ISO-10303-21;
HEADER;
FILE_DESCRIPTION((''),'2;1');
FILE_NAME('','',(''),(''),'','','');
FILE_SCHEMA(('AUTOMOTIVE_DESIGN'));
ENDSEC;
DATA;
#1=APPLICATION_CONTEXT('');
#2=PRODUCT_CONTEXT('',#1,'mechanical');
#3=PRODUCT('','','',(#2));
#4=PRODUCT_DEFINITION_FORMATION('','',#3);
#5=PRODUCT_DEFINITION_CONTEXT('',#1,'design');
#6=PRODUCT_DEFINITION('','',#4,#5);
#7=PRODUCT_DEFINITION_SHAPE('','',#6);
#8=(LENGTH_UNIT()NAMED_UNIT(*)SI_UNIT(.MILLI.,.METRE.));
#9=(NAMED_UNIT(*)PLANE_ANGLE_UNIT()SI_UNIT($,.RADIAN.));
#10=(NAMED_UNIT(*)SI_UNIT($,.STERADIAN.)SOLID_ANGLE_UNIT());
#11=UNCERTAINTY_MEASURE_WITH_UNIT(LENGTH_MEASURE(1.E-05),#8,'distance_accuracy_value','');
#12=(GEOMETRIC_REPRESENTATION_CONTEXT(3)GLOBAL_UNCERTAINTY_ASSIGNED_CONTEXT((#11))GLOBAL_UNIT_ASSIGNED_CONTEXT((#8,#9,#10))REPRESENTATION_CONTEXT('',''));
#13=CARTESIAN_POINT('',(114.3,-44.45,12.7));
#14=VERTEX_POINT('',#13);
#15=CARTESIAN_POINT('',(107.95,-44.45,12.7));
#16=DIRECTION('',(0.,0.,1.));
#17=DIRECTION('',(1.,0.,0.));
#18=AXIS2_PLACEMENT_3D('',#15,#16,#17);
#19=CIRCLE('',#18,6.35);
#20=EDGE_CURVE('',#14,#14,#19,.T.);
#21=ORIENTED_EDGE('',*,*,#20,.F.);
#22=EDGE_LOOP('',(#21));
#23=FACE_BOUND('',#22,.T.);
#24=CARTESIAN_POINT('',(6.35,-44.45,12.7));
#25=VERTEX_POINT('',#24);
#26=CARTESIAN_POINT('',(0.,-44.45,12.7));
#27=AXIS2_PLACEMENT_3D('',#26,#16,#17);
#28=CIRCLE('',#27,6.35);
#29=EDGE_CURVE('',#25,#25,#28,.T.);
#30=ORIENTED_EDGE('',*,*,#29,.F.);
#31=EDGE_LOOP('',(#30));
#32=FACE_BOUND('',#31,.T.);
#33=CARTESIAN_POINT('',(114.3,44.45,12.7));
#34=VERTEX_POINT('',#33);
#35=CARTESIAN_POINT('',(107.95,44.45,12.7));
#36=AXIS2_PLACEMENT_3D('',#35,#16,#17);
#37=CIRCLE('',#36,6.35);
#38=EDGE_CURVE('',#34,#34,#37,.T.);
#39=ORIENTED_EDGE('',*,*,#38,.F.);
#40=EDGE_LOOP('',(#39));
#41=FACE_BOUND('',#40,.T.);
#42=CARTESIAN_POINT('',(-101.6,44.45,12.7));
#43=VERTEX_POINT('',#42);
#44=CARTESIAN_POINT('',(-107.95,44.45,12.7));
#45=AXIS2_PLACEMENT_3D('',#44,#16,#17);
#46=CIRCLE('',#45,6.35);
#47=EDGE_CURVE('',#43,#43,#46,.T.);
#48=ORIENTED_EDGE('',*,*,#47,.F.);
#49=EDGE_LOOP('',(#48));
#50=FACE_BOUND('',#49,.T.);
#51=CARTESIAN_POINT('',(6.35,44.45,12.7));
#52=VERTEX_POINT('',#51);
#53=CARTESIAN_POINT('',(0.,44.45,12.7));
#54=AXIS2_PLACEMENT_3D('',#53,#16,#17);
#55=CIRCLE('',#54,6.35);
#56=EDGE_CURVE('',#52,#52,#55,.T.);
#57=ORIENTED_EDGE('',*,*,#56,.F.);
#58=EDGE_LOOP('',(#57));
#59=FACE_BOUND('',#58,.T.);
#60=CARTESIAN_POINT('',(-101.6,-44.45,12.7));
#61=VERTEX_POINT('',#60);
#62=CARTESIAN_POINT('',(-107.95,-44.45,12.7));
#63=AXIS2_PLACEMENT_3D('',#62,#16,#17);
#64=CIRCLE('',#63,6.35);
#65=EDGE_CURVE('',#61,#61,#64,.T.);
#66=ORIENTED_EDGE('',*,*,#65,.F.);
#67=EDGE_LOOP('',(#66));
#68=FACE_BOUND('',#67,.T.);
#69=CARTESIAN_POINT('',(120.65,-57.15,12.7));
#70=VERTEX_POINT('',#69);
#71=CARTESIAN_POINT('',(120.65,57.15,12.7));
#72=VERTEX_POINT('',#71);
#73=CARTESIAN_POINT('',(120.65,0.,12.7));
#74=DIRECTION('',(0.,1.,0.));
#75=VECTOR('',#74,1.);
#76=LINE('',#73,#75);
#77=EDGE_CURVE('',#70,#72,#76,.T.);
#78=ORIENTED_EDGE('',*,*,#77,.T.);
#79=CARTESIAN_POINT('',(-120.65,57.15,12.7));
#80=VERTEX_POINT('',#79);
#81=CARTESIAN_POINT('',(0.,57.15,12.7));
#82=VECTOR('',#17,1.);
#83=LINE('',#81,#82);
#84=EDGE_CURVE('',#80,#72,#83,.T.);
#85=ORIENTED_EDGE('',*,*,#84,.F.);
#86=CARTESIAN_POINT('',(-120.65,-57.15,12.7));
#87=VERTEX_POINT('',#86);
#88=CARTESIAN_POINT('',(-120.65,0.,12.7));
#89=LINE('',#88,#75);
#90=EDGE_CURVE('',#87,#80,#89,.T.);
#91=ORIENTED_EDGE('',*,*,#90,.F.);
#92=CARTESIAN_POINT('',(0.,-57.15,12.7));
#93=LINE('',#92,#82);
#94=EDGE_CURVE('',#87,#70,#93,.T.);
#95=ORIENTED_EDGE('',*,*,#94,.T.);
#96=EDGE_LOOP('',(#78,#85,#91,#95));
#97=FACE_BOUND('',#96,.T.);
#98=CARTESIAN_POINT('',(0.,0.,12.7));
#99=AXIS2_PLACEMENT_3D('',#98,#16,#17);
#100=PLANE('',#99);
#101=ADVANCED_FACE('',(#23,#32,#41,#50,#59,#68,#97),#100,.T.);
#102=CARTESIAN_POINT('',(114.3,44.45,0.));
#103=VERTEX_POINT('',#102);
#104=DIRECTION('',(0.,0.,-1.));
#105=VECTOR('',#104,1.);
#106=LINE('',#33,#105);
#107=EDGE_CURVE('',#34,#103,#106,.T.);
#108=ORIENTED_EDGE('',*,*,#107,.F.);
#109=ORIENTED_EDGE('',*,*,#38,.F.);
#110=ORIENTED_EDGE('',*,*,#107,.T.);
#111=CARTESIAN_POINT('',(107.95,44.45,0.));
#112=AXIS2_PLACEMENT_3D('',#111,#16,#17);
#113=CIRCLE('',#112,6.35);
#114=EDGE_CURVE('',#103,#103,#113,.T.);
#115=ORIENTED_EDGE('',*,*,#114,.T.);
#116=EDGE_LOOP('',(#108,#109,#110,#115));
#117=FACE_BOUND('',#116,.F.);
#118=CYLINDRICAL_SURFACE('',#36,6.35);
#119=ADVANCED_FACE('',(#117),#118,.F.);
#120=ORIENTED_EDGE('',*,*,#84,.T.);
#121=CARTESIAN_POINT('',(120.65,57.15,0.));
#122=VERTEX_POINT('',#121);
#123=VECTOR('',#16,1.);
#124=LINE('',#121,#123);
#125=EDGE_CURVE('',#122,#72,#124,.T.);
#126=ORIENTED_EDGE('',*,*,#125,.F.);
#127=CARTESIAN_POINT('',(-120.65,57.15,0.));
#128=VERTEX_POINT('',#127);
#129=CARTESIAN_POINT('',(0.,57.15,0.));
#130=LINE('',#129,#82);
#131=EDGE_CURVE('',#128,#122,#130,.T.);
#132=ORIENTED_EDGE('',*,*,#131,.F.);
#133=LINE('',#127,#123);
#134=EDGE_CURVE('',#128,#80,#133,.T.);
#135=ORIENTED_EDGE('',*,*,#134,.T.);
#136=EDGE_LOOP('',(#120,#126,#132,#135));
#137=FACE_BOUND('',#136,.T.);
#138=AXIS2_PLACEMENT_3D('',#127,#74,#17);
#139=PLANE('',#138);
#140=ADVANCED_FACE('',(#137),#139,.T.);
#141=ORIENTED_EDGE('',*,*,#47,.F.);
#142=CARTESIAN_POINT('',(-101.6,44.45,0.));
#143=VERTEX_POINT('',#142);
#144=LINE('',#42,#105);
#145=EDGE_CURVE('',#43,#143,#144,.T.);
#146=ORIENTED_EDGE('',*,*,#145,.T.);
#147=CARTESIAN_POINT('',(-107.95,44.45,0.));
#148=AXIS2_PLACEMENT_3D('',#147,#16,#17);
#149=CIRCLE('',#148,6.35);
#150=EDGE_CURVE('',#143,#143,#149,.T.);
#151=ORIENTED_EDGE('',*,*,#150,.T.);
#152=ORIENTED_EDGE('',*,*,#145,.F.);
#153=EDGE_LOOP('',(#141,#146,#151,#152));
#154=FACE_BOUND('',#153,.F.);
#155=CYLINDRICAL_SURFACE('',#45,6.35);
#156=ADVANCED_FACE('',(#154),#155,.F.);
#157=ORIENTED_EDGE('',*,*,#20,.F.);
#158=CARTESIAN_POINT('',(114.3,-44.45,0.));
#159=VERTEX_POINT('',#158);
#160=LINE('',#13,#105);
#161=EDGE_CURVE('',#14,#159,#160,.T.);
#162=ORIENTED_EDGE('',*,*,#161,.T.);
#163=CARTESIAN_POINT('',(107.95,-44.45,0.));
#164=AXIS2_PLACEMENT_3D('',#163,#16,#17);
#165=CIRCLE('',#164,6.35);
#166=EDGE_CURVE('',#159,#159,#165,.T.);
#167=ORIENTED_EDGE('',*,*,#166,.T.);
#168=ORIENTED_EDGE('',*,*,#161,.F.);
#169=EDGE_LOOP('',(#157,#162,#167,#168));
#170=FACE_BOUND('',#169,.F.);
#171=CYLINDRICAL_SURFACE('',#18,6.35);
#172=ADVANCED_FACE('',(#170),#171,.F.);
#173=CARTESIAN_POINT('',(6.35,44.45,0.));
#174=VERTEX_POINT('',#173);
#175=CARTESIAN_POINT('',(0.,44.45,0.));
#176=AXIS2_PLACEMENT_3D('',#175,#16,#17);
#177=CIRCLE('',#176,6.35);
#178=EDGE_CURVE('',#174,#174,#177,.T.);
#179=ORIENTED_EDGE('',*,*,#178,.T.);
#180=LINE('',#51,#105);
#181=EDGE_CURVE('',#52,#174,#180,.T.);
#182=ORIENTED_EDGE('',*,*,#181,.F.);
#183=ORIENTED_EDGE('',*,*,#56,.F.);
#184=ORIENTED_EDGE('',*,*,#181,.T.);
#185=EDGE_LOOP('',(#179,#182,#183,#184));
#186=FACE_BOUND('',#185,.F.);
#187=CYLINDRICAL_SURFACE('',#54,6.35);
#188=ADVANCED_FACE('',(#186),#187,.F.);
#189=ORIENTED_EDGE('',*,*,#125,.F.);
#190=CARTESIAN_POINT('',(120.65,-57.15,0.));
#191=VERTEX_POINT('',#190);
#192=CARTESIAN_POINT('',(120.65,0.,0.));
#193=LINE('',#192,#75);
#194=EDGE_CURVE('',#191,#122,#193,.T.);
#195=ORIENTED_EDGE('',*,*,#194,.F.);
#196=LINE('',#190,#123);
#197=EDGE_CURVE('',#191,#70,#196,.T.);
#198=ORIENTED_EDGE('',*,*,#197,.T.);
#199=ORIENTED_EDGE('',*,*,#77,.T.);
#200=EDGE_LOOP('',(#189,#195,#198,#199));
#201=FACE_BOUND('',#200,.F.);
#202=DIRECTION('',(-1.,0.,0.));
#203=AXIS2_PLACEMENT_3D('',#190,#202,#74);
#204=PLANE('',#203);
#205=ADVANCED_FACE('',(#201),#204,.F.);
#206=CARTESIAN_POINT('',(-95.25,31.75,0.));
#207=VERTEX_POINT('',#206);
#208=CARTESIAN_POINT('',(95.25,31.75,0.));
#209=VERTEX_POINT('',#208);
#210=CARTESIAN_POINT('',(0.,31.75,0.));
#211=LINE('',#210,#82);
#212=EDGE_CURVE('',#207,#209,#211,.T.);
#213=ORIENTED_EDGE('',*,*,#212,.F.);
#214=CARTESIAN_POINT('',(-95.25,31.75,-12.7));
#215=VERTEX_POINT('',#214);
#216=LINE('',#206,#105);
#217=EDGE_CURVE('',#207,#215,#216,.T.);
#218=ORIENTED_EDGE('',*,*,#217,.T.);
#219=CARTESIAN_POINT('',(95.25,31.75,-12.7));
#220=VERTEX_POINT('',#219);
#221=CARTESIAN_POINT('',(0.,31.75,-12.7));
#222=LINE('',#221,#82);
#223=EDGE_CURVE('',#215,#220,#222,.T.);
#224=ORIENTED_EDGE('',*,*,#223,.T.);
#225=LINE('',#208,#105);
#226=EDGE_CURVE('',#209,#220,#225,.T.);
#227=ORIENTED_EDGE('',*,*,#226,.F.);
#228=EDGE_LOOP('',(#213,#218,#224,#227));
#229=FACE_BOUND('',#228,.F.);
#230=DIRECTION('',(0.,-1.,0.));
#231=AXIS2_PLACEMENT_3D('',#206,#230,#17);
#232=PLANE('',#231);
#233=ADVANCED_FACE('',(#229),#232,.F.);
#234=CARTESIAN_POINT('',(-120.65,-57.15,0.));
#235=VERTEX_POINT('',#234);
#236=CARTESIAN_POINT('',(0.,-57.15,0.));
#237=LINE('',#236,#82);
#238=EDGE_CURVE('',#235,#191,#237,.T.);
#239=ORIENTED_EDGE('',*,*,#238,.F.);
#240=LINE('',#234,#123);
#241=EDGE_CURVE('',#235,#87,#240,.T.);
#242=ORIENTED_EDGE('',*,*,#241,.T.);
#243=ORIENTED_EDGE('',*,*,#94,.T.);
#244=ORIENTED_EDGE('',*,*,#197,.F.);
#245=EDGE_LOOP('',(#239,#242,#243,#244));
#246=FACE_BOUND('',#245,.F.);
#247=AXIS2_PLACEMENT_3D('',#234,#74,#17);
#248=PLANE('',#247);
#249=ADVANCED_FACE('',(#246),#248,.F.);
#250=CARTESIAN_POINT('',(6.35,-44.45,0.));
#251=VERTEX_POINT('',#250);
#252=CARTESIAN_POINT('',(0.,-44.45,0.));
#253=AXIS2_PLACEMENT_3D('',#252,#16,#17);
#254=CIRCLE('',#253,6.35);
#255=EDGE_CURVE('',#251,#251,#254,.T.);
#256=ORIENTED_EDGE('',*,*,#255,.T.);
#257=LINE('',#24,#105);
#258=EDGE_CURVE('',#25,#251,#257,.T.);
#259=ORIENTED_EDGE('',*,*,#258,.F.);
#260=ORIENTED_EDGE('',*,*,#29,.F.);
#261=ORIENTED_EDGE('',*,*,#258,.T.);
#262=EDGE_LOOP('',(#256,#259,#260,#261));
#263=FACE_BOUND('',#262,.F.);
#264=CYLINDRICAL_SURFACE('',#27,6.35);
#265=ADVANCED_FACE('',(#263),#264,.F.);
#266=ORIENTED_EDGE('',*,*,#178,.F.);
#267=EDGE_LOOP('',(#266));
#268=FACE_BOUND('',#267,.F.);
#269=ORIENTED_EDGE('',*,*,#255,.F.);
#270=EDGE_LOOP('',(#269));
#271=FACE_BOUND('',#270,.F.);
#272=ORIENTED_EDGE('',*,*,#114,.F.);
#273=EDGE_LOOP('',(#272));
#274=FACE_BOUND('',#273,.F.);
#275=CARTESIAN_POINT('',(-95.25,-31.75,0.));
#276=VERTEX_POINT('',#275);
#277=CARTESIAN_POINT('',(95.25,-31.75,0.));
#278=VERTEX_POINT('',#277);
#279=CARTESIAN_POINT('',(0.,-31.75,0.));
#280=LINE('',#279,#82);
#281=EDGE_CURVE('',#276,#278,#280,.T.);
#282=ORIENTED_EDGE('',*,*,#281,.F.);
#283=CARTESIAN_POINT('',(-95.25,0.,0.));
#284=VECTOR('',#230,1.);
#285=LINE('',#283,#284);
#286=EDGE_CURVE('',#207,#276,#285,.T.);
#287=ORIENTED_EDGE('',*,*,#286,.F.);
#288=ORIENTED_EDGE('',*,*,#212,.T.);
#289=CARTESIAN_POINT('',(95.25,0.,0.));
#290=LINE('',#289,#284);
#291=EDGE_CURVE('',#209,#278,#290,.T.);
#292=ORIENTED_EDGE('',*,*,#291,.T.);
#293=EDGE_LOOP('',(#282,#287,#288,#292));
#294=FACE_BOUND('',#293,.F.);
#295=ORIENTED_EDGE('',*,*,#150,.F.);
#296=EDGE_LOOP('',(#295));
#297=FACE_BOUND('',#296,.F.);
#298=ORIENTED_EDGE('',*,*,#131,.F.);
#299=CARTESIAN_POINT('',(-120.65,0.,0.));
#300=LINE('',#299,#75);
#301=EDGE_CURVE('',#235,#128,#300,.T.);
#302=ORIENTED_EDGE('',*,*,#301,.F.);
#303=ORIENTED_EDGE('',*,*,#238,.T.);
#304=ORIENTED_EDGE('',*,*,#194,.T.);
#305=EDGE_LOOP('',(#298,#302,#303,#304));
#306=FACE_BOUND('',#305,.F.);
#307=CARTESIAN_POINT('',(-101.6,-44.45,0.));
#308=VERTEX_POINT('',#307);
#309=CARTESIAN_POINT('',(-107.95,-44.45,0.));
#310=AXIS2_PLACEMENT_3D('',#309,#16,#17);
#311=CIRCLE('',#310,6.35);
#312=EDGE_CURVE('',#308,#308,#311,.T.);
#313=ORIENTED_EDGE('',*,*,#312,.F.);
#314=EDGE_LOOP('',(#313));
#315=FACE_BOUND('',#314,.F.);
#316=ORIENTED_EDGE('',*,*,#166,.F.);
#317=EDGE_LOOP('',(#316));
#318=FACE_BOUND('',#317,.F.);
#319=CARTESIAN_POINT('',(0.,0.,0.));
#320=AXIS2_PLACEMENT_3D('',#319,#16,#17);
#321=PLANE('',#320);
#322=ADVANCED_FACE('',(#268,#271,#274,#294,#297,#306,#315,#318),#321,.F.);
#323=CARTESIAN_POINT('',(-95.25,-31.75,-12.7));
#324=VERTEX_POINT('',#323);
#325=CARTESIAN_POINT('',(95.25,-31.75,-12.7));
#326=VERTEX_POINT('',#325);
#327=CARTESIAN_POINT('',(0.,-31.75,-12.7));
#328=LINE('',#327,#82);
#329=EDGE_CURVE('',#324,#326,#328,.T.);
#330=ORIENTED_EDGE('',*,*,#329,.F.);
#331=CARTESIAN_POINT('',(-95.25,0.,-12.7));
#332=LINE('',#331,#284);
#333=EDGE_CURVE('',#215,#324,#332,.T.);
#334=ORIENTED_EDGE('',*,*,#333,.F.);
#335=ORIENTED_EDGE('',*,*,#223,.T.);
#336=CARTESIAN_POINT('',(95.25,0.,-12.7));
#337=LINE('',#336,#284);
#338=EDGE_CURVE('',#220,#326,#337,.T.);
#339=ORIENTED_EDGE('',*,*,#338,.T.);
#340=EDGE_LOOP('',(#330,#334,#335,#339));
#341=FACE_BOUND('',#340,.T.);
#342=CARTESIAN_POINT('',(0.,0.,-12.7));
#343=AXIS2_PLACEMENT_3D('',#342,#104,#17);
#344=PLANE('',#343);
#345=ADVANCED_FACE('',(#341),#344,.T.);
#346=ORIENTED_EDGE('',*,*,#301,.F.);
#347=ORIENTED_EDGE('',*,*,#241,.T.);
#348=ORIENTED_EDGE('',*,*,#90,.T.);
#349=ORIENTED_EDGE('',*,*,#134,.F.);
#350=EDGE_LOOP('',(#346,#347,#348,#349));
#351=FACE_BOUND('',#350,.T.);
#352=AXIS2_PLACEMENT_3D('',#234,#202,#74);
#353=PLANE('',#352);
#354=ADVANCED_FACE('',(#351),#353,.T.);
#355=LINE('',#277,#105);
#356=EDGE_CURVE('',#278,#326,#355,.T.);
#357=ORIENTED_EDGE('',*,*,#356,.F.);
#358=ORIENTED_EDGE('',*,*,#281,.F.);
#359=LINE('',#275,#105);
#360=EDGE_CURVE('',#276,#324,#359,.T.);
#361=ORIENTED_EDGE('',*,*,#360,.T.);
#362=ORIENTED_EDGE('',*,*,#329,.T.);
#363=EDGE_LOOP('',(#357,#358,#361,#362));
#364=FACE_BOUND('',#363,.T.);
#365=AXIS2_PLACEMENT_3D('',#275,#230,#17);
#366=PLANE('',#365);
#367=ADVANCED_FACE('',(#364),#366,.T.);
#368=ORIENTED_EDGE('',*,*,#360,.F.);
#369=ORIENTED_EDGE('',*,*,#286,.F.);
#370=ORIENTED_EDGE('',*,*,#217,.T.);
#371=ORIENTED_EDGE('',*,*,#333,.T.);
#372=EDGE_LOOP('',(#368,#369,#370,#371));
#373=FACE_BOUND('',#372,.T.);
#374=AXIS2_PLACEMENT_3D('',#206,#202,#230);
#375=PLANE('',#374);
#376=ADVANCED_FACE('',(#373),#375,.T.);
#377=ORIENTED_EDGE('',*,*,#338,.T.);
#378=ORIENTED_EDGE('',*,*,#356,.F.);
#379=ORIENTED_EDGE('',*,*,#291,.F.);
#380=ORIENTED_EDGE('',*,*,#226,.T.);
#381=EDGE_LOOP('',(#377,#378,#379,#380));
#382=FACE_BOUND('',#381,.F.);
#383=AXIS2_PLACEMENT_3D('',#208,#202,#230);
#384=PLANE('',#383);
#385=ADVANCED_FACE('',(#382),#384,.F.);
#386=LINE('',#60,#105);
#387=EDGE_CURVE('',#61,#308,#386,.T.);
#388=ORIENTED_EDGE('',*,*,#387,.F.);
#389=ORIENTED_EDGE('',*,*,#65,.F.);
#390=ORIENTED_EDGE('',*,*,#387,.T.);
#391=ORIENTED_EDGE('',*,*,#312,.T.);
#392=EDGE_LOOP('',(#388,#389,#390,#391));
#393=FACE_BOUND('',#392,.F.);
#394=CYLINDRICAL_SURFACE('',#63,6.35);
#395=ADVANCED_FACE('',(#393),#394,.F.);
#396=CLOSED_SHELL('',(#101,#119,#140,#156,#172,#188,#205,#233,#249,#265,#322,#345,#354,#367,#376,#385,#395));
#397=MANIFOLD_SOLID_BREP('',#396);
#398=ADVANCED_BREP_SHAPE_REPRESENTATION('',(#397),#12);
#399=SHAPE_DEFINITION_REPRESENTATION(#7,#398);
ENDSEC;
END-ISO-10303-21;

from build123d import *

# Parameters (mm, degrees)
F0_W     = 241.3
F0_H     = 114.3
F1_DEPTH = 12.7
F2_W     = 190.5
F2_H     = 63.5
F3_DEPTH = 12.7
F4_R     = 6.35
F5_DEPTH = 12.7


# Not quite as in the source:
# - a feature names something its author has since deleted; it is built from what else it names


with BuildPart() as f1:
    # F0 (on Top) → F1 (new body)
    with BuildSketch(Plane.XY):
        Rectangle(F0_W, F0_H)
    extrude(amount=F1_DEPTH)

    # F2 (on face) → F3 (join)
    with BuildSketch(Plane(origin=(0, 0, 0), x_dir=(1, 0, 0), z_dir=(0, 0, -1))):
        Rectangle(F2_W, F2_H)
    extrude(amount=F3_DEPTH)

    # F4 (on face) → F5 (cut)
    with BuildSketch(Plane.XY.offset(12.7)):
        with Locations((-107.95, 44.45)):
            Circle(F4_R)
        with Locations((-107.95, -44.45)):
            Circle(F4_R)
        with Locations((107.95, -44.45)):
            Circle(F4_R)
        with Locations((107.95, 44.45)):
            Circle(F4_R)
        with Locations((0, 44.45)):
            Circle(F4_R)
        with Locations((0, -44.45)):
            Circle(F4_R)
    extrude(amount=-F5_DEPTH, mode=Mode.SUBTRACT)


solid = f1.part
